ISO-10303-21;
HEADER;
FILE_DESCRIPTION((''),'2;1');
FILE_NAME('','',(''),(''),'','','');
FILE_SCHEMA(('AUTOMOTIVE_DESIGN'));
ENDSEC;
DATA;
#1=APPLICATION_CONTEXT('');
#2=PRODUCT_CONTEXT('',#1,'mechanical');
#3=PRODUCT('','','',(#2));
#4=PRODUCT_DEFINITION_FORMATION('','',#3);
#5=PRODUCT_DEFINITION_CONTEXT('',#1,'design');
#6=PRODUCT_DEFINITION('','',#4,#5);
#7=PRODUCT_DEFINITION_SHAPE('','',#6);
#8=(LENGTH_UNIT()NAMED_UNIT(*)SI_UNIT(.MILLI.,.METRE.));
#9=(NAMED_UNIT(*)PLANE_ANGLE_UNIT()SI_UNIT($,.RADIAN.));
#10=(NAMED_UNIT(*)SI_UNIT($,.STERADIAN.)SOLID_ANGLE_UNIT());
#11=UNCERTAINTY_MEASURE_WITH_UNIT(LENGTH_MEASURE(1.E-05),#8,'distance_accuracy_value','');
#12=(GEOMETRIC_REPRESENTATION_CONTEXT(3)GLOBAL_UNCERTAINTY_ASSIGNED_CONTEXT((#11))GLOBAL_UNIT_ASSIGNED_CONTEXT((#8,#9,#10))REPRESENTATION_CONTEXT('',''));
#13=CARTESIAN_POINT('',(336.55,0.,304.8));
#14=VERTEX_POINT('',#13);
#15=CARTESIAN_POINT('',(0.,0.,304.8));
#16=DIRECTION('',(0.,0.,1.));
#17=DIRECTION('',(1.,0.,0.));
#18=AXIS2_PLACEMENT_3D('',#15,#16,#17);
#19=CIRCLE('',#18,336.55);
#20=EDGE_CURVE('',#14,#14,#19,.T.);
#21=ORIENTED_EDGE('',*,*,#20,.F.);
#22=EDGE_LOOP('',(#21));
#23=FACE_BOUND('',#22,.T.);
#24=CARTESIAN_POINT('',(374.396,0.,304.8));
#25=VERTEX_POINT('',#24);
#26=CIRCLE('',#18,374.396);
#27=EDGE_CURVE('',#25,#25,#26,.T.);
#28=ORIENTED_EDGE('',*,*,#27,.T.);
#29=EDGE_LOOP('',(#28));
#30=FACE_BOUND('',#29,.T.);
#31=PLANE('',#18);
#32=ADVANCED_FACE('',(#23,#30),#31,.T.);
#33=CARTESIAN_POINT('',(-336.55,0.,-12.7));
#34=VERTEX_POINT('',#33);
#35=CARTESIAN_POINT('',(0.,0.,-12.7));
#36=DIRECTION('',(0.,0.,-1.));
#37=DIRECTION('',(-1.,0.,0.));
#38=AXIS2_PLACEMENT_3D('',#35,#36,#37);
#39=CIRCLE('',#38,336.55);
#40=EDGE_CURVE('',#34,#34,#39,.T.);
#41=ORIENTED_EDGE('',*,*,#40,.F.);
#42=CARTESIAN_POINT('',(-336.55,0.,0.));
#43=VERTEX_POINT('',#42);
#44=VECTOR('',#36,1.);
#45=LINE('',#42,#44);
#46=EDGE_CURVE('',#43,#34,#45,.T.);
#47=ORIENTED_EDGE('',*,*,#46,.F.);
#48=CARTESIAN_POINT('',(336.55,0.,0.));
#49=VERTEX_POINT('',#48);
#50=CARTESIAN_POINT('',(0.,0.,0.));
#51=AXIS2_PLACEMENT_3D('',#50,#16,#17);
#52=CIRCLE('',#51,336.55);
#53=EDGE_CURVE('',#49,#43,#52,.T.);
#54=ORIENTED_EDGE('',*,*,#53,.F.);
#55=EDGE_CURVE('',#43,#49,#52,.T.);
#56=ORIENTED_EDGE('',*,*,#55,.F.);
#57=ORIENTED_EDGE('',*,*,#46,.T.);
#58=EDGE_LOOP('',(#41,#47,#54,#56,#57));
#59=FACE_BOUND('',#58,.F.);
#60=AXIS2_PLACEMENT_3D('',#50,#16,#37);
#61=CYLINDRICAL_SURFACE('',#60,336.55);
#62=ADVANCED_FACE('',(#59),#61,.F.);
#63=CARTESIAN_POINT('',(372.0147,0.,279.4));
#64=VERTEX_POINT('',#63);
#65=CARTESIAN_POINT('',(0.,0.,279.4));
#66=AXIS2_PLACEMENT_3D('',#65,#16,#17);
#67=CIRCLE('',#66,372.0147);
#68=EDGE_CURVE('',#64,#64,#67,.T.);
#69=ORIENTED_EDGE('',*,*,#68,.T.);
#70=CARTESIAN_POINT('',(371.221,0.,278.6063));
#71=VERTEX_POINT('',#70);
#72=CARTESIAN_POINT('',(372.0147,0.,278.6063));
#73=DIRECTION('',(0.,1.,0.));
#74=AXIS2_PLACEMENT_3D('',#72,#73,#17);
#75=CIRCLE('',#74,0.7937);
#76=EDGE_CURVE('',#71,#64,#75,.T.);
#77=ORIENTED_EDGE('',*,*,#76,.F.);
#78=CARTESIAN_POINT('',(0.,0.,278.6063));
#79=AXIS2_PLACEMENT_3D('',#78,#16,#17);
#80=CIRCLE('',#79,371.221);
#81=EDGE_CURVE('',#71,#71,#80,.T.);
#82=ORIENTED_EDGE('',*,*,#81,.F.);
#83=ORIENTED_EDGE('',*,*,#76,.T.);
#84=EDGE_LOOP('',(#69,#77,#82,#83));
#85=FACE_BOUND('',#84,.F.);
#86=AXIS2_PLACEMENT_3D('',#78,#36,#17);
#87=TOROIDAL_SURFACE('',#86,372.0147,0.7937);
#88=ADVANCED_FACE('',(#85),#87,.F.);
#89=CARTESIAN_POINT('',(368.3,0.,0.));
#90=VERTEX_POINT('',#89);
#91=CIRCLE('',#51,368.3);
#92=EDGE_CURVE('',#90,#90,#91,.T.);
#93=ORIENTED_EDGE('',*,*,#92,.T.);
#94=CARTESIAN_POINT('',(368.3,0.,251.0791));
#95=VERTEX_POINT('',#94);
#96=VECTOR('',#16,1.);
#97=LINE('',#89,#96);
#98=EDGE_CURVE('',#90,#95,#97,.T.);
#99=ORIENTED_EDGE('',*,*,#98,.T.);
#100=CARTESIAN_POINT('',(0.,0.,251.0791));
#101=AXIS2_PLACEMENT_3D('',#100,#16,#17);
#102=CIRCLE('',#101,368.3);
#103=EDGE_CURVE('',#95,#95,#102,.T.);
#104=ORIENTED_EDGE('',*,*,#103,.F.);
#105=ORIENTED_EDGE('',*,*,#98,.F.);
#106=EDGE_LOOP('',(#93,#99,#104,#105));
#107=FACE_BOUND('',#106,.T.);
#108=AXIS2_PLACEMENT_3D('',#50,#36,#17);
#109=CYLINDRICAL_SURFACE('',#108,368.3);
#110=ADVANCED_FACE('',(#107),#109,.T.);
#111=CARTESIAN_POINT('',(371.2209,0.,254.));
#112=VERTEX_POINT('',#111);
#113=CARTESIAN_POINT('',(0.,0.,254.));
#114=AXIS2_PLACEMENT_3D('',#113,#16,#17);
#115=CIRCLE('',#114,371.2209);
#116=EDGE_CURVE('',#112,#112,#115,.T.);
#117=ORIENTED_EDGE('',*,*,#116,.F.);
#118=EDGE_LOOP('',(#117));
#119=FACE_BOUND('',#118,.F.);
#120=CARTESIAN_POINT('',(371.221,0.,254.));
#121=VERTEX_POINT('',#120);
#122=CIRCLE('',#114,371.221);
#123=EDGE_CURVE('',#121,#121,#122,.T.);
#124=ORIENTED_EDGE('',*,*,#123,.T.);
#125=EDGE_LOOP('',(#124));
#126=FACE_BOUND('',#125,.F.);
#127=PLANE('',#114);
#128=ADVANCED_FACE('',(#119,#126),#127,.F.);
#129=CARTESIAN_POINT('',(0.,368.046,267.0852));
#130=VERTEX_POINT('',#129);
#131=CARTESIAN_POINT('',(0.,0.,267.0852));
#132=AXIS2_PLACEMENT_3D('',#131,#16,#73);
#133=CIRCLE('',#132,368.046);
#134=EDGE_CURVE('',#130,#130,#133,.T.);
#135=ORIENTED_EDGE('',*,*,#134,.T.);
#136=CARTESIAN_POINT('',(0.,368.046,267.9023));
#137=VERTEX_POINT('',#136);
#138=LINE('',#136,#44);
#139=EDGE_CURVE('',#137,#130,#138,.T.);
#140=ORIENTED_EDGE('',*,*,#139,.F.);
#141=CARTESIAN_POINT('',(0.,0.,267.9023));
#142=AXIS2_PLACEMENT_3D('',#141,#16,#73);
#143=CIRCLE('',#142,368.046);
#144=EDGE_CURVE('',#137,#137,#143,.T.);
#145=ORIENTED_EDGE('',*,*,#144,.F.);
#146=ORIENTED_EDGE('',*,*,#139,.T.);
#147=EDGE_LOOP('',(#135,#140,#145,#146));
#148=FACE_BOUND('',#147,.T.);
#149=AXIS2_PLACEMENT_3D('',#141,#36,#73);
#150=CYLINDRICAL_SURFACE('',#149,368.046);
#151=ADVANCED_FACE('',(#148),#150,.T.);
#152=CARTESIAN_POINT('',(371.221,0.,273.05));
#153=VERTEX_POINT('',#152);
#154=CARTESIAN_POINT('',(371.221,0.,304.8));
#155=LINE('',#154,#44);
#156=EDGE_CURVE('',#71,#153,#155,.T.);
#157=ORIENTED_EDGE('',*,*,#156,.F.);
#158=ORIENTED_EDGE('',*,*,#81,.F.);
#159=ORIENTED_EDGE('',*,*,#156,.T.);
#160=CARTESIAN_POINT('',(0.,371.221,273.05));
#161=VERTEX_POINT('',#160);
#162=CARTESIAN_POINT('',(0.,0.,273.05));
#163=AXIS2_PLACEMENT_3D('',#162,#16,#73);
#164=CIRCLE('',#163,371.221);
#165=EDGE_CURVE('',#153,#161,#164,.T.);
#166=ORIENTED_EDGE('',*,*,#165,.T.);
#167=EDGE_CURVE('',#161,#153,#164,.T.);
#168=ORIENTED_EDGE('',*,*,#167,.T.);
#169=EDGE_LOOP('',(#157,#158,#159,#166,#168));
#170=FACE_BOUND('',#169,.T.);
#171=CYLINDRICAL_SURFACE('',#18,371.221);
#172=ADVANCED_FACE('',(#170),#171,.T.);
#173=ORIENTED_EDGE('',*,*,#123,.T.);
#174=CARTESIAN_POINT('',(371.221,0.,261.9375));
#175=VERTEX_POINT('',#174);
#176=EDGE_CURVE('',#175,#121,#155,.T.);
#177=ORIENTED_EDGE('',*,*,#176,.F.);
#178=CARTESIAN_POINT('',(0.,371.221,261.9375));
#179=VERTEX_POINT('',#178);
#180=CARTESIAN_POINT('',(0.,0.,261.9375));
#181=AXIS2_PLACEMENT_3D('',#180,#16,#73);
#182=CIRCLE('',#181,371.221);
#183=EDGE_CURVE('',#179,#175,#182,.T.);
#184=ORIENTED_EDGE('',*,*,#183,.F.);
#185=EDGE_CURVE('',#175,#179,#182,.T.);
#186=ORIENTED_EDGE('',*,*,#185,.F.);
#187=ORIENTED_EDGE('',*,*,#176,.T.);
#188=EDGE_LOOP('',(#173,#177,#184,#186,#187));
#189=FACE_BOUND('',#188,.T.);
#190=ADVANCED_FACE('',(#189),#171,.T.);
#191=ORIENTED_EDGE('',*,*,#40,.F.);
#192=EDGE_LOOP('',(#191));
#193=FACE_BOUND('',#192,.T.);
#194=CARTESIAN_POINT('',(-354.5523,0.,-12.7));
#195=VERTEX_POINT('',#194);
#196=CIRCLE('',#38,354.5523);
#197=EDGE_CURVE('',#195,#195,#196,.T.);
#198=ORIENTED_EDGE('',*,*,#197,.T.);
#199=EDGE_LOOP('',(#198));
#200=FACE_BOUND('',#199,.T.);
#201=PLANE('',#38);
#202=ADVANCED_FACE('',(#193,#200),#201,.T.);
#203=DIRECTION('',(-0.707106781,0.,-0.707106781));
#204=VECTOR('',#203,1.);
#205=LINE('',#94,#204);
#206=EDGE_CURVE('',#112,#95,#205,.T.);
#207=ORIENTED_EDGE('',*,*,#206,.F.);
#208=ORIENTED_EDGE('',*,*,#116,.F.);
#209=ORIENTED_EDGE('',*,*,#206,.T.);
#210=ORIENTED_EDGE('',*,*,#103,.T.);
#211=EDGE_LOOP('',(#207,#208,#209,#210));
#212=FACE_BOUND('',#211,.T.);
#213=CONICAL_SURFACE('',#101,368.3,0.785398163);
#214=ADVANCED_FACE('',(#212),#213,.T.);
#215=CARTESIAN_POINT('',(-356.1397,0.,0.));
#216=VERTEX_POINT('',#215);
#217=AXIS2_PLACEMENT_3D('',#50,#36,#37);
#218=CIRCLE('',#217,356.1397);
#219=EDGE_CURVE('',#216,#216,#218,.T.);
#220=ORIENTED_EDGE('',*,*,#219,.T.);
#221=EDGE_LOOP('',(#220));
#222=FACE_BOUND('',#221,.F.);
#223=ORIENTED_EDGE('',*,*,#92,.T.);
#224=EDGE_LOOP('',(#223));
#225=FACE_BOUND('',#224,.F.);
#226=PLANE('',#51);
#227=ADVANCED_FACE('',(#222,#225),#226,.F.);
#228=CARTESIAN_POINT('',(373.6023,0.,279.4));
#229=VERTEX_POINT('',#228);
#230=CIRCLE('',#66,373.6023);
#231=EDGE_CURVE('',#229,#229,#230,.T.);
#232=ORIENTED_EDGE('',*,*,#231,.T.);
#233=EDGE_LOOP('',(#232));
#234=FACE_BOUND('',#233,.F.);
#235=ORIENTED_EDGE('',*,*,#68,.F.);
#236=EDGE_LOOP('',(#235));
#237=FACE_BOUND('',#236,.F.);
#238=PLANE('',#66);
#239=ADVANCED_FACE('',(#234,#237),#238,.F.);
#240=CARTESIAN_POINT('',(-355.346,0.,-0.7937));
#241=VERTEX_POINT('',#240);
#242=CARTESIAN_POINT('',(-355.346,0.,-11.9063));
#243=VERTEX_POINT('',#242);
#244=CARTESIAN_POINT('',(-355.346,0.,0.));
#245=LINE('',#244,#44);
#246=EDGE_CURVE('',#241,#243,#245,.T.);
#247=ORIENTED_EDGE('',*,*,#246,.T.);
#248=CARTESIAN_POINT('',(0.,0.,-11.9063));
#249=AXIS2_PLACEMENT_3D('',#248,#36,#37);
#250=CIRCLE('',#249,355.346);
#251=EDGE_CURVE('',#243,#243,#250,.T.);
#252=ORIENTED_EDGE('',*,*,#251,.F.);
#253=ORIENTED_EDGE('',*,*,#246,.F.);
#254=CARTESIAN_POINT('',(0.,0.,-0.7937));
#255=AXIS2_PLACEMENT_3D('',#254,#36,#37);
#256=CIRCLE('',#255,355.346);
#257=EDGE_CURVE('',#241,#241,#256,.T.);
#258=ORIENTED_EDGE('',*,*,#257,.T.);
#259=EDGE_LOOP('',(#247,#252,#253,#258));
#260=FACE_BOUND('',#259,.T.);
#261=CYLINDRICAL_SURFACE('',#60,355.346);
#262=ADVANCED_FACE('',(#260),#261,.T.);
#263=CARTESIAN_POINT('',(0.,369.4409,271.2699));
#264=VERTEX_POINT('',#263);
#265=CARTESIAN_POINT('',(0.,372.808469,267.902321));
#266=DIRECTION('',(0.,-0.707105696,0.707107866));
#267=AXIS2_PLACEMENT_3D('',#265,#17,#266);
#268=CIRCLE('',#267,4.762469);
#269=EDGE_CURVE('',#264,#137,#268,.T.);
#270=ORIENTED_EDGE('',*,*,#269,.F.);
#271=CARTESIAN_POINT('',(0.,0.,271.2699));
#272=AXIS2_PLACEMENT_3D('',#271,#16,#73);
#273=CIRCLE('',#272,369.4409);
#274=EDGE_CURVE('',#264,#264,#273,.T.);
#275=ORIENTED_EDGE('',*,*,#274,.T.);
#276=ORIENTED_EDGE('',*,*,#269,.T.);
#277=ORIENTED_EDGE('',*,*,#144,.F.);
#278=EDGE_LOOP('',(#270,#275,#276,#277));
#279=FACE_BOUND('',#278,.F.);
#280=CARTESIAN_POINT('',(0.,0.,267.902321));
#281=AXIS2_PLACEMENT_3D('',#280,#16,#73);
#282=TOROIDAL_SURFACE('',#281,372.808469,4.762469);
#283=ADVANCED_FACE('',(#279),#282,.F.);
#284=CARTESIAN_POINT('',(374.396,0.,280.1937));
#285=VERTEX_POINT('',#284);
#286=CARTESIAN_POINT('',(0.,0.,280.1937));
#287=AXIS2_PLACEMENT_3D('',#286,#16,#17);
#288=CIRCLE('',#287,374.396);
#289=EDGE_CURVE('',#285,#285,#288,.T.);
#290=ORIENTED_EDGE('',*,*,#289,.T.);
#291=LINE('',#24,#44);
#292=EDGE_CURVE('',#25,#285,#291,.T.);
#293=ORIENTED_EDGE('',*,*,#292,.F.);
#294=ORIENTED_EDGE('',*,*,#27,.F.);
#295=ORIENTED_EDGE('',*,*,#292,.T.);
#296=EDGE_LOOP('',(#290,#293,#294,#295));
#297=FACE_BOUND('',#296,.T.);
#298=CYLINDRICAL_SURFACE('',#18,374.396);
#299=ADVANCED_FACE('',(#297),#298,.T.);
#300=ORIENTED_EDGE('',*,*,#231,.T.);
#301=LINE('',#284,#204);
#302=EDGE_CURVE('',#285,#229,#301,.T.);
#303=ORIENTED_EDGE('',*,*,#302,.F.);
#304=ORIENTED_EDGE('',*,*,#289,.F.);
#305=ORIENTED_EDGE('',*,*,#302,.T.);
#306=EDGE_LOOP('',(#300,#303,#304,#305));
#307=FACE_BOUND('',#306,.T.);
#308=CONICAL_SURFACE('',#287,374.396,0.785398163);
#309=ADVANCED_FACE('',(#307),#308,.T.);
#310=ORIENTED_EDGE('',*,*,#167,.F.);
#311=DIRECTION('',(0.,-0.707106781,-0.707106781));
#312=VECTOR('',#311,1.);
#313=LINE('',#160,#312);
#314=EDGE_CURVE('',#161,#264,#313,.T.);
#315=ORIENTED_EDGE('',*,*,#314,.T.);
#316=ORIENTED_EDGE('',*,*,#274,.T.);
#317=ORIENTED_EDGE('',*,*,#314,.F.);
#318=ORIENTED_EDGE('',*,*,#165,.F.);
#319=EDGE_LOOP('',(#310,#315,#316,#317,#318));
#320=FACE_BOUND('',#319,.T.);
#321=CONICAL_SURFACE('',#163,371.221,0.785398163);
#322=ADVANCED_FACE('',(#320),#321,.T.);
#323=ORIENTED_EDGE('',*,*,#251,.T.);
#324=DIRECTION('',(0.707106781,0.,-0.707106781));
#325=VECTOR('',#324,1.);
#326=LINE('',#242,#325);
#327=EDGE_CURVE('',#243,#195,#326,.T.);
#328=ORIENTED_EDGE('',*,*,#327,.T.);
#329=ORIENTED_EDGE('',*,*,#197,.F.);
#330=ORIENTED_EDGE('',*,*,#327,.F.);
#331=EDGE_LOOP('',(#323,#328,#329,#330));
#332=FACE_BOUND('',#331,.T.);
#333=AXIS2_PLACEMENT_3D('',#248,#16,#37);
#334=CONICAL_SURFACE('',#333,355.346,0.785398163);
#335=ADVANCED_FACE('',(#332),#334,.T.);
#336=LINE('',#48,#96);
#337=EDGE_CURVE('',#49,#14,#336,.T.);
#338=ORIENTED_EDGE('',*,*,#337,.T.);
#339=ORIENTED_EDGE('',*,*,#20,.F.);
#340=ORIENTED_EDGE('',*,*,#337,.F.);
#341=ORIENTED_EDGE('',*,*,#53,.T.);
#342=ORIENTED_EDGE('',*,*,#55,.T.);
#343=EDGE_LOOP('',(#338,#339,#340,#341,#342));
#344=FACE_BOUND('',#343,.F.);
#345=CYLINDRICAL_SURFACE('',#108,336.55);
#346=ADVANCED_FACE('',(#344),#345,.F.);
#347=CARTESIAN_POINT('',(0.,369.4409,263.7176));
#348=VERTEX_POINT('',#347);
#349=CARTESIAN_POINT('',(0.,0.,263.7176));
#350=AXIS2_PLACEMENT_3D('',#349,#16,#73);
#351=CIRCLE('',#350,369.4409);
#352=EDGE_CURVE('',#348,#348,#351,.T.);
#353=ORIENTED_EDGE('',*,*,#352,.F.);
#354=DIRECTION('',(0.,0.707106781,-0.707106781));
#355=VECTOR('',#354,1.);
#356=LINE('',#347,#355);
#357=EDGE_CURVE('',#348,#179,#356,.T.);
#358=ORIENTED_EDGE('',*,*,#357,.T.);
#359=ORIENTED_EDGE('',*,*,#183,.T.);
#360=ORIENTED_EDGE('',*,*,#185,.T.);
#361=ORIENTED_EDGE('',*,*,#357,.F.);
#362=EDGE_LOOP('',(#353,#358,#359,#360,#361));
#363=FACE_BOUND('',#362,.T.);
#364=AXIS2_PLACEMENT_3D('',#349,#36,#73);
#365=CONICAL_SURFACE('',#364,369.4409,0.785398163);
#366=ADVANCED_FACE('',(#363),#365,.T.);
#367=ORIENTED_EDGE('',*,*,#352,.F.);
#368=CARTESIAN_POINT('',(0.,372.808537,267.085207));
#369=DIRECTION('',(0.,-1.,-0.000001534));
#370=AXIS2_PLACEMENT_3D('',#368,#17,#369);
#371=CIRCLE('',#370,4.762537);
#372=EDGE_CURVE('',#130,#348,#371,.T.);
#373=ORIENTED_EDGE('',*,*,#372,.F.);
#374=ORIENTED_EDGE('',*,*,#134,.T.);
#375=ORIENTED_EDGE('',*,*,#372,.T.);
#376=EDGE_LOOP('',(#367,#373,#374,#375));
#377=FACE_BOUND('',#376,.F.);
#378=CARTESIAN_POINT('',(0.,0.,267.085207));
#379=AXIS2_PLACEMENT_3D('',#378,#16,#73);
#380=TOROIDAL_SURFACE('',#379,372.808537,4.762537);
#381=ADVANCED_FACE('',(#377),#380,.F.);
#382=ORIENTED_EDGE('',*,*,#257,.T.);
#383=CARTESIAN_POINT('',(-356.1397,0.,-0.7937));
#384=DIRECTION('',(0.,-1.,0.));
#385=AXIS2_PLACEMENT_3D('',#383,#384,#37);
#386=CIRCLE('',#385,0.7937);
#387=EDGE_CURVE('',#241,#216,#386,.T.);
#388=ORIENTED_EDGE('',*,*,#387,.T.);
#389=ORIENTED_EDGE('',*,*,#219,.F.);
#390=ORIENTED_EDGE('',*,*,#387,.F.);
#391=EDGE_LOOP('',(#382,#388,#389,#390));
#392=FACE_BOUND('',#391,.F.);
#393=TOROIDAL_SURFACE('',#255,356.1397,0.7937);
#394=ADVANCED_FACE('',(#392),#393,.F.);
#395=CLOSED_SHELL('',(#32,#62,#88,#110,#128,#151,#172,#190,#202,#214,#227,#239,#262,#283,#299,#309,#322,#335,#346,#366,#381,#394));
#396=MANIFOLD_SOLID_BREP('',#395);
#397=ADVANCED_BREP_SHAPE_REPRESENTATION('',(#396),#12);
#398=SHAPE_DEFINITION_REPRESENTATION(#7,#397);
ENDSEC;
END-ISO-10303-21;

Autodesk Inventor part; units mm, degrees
ref_plane "YZ Plane" through (0, 0, 0) normal (1, 0, 0) x (0, 1, 0)
ref_plane "XZ Plane" through (0, 0, 0) normal (0, 1, 0) x (-1, 0, 0)
ref_plane "XY Plane" through (0, 0, 0) normal (0, 0, 1) x (1, 0, 0)
sketch "Sketch1" plane through (0, 0, 0) normal (0, 0, 1) x (1, 0, 0)
  circle A0 centre (0, 0) radius 336.55
  circle A1 centre (0, 0) radius 368.3
  dimension "d0" = 673.1
  dimension "d1" = 736.6
extrude "Extrusion1" add sketch "Sketch1" along normal blind 304.8
sketch "Sketch2" plane through (0, 0, 304.8) normal (0, 0, 1) x (1, 0, 0)
  circle A0 centre (0, 0) radius 368.3 projected
  circle A1 centre (0, 0) radius 371.221
  circle A2 centre (0, 0) radius 374.396
  dimension "d4" = 742.442
  dimension "d5" = 748.792
extrude "Extrusion2" add sketch "Sketch2" against normal blind 50.8 contours A1
extrude "Extrusion3" add sketch "Sketch2" against normal blind 25.4 contours A2
chamfer "Chamfer1" distance 2.921 angle 45 1 edges at (-368.3, 0, 254)
sketch "Sketch3" plane through (0, 0, 0) normal (0, 0, -1) x (-1, 0, 0)
  circle A0 centre (0, 0) radius 355.346
  circle A1 centre (0, 0) radius 336.55 projected
  dimension "d13" = 710.692
extrude "Extrusion4" add sketch "Sketch3" along normal blind 12.7
fillet "Fillet1" radius 0.7937 2 edges at (355.346, 0, 0) (-371.221, 0, 279.4)
chamfer "Chamfer2" distance 0.7937 angle 45 1 edges at (355.346, 0, -12.7)
chamfer "Chamfer3" distance 0.7937 angle 45 1 edges at (-374.396, 0, 279.4)
sketch "Sketch4" plane through (0, 0, 0) normal (1, 0, 0) x (0, 1, 0)
  line L0 (371.221, 278.6063) -> (371.221, 254) construction
  line L1 (-374.396, 304.8) -> (374.396, 304.8) construction
  line L2 (371.221, 273.05) -> (369.4409, 271.2699)
  arc A0 (369.4409, 271.2699) -> (368.046, 267.9023) centre (372.8085, 267.9023) ccw
  line L3 (368.046, 267.9023) -> (368.046, 267.0852)
  arc A1 (368.046, 267.0852) -> (369.4409, 263.7176) centre (372.8085, 267.0852) ccw
  line L4 (369.4409, 263.7176) -> (371.221, 261.9375)
  line L5 (371.221, 261.9375) -> (371.221, 273.05)
  line L6 (0, -76.2) -> (0, 368.3) projected
  point P0 (0, 0)
  dimension "d23" = 11.1125
  dimension "d24" = 3.175
  dimension "d25" = 4.7625
  dimension "d26" = 31.75
  dimension "d27" = 45
revolve "Revolution1" cut sketch "Sketch4" angle 360 about axis through (0, 0, -10) along (0, 0, 1)
equation "\"d10\" = -0.5 * d1 + 0.5 * d4"
properties part number "A1-19037-100-06 HCWI liner - pup" material "Iron, HCWI"
